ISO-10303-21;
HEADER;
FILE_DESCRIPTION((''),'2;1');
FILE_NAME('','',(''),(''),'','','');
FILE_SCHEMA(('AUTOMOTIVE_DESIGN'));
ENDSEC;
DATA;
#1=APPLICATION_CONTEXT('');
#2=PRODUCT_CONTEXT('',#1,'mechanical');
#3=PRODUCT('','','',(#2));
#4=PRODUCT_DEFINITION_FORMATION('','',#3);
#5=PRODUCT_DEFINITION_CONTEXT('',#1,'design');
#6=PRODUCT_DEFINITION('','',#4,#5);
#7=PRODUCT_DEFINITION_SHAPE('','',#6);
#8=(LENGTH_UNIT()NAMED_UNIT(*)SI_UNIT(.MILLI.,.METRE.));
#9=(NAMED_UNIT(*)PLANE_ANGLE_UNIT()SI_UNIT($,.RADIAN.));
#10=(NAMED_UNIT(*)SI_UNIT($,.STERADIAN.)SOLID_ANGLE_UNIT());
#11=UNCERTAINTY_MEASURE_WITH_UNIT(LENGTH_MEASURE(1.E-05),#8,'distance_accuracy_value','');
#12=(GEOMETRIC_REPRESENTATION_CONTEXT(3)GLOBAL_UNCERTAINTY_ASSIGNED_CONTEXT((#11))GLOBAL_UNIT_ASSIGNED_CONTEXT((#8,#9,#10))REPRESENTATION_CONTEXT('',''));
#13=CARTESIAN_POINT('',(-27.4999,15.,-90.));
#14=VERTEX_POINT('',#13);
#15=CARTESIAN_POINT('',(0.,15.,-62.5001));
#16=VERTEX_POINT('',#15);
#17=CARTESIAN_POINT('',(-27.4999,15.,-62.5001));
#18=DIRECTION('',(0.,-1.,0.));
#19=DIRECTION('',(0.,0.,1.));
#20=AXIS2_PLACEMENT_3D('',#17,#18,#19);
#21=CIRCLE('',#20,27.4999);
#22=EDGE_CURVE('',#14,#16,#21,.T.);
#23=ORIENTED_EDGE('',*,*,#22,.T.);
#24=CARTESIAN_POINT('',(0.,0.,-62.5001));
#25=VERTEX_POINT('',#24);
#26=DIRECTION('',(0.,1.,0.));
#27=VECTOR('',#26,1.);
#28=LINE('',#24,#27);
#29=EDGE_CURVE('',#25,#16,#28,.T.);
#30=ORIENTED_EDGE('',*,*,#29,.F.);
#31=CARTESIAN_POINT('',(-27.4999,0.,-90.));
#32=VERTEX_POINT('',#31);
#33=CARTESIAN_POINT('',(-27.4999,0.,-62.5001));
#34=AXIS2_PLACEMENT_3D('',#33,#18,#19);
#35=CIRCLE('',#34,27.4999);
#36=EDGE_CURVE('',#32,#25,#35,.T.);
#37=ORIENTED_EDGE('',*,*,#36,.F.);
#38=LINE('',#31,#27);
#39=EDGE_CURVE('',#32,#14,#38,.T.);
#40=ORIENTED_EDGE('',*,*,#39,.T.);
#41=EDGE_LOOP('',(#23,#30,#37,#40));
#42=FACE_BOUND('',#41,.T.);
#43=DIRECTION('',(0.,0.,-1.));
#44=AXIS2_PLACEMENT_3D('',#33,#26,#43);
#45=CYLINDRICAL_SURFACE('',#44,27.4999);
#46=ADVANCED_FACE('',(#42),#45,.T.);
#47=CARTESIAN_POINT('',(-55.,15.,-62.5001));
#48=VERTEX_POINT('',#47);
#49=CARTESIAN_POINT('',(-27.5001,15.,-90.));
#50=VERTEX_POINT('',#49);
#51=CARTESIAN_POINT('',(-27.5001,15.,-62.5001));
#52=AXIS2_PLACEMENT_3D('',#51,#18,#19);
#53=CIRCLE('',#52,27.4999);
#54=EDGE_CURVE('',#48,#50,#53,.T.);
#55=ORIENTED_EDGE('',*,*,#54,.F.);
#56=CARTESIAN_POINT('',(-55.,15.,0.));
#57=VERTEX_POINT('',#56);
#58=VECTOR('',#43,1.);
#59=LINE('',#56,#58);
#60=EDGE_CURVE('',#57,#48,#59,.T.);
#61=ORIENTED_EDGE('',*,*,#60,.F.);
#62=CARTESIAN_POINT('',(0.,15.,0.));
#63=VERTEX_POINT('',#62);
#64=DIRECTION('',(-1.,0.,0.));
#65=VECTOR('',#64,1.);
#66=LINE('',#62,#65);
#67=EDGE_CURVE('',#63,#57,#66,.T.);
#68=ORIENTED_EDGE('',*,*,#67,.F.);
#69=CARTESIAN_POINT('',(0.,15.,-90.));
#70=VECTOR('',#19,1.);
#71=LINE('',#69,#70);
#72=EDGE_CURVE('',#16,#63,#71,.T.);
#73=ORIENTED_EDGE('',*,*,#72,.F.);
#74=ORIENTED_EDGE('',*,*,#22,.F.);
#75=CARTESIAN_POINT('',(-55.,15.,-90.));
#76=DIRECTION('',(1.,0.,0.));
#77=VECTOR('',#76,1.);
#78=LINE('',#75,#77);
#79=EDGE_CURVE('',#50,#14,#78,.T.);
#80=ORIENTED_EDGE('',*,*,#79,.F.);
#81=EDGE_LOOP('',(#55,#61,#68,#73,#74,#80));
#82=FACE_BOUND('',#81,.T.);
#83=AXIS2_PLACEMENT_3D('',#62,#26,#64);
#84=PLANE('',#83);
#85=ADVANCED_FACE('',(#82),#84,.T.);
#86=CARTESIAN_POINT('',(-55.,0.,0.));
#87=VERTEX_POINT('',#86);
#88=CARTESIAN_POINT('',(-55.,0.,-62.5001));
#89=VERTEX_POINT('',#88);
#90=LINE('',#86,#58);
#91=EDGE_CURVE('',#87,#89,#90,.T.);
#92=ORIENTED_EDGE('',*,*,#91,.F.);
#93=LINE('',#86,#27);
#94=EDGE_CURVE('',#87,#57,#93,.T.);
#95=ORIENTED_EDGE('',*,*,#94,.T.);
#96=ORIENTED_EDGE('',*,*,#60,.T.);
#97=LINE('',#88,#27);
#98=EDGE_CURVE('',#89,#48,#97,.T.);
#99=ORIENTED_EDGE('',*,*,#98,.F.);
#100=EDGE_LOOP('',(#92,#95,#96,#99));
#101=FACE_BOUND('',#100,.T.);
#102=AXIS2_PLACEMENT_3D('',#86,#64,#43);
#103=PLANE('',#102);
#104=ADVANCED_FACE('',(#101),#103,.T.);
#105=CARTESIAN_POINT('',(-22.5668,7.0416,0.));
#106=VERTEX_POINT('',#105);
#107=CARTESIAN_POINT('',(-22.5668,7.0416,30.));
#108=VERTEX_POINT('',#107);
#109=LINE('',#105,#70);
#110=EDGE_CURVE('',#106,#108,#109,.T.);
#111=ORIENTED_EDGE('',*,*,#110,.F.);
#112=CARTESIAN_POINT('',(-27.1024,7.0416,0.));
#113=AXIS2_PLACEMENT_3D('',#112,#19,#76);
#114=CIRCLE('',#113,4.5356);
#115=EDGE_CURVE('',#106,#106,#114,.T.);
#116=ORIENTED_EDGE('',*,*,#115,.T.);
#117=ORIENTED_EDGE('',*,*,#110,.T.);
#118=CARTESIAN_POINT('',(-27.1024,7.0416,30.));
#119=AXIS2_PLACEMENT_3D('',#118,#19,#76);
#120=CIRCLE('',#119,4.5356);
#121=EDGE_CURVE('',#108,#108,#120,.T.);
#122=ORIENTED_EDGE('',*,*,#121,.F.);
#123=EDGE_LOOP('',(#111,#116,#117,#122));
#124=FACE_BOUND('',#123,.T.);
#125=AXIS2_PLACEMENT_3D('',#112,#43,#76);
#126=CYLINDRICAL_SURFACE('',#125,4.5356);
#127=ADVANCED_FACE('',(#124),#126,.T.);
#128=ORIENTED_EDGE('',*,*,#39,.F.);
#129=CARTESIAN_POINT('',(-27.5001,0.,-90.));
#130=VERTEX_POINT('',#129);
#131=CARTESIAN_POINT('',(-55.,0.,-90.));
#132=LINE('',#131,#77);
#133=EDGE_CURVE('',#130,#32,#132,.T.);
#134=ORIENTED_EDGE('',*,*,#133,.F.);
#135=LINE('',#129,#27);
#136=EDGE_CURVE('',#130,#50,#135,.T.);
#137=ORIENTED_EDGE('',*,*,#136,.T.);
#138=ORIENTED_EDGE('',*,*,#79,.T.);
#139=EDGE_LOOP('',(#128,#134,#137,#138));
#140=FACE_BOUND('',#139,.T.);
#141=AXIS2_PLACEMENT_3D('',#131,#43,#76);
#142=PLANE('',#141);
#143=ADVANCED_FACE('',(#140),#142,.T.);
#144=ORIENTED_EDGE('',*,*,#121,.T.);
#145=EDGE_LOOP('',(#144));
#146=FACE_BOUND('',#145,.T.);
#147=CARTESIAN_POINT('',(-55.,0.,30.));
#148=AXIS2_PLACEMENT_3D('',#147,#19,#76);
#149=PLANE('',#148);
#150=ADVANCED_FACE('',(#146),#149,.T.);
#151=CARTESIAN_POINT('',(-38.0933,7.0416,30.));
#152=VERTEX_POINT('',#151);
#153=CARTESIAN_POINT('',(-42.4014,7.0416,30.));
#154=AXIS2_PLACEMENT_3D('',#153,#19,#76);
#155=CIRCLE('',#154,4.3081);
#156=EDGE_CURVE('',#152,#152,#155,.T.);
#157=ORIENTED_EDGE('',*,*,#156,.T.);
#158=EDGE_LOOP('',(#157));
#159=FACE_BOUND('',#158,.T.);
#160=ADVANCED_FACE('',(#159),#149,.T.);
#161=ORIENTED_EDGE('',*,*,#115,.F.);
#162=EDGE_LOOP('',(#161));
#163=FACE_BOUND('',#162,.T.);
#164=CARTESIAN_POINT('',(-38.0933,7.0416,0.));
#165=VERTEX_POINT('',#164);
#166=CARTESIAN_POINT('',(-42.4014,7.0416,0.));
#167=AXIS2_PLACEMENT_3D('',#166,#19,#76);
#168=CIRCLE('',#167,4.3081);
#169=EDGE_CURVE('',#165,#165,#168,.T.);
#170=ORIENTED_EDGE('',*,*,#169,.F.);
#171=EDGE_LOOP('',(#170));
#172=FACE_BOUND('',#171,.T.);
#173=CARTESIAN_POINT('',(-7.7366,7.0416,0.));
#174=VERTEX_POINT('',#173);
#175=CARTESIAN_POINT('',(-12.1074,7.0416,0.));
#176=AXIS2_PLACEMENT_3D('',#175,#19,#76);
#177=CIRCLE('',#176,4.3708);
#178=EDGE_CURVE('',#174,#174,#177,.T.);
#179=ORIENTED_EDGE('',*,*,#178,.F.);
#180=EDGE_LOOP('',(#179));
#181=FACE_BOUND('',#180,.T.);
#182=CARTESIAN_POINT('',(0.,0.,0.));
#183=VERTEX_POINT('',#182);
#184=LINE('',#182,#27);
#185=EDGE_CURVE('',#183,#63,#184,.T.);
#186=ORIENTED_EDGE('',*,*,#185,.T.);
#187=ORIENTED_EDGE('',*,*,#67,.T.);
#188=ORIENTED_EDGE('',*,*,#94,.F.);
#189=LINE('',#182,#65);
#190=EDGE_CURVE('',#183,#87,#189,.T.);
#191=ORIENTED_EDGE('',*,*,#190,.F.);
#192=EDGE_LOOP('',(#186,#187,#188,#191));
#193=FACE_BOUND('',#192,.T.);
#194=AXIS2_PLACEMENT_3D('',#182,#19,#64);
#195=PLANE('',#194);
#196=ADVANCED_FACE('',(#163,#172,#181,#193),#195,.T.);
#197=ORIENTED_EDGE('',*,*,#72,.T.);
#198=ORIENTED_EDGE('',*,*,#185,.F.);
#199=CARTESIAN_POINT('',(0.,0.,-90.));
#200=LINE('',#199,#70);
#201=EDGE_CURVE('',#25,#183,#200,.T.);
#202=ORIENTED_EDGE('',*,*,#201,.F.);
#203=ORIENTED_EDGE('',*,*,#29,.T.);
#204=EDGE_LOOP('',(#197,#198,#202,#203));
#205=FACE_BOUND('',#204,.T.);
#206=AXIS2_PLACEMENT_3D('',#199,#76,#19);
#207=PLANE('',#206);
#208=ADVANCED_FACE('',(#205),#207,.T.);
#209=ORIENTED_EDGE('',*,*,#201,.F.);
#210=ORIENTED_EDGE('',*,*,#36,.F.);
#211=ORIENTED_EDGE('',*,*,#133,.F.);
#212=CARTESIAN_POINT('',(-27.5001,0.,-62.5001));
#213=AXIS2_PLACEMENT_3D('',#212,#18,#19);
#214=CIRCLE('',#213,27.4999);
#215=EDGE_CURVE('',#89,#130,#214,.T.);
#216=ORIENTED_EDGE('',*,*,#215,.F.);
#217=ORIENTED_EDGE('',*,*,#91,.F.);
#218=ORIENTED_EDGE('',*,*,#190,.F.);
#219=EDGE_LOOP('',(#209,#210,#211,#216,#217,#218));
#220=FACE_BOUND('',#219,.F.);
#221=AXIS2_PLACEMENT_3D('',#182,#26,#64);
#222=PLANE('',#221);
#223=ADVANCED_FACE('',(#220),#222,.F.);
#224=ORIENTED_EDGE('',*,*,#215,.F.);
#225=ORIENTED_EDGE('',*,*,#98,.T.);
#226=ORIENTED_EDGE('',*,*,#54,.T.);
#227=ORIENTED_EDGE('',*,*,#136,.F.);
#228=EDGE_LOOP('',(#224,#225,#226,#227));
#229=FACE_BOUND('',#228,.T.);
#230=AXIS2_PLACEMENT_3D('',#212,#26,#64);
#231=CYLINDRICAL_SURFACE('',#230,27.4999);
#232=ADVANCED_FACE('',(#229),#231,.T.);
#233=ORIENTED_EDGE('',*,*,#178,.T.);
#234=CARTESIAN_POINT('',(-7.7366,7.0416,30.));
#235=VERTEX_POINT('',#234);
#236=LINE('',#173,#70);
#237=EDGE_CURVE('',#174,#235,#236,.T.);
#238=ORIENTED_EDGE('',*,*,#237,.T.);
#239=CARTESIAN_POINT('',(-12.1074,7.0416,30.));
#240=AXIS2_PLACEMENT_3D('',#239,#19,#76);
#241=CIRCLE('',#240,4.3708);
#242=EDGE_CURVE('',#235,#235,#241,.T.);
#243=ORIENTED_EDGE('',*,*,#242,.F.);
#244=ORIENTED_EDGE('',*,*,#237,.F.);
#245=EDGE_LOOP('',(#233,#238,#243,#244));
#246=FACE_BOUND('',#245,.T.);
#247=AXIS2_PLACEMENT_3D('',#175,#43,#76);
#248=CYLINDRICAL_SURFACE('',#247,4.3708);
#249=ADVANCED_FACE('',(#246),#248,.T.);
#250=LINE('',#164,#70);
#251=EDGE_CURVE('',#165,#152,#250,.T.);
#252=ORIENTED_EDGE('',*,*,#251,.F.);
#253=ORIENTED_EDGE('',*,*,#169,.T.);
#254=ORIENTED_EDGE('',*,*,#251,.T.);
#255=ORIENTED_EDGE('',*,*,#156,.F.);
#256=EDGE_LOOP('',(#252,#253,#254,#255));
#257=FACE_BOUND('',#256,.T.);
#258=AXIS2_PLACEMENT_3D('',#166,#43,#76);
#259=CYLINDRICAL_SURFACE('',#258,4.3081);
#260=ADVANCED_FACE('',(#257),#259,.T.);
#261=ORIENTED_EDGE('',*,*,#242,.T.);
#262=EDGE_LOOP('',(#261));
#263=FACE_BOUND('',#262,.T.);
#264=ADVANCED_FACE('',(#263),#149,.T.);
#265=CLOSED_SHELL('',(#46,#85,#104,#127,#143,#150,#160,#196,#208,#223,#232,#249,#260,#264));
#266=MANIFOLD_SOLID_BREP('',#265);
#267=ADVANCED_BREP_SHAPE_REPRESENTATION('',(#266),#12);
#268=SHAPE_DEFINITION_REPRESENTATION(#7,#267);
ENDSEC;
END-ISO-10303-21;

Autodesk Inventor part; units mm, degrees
ref_plane "YZ Plane" through (0, 0, 0) normal (1, 0, 0) x (0, 1, 0)
ref_plane "XZ Plane" through (0, 0, 0) normal (0, 1, 0) x (-1, 0, 0)
ref_plane "XY Plane" through (0, 0, 0) normal (0, 0, 1) x (1, 0, 0)
sketch "Sketch1" plane through (0, 0, 0) normal (0, 1, 0) x (-1, 0, 0)
  line L0 (0, 0) -> (55, 0)
  line L1 (55, 0) -> (55, -90)
  line L2 (55, -90) -> (0, -90)
  line L3 (0, -90) -> (0, 0)
  dimension "d0" = 90
  dimension "d1" = 55
extrude "Extrusion1" add sketch "Sketch1" along normal blind 15
full round fillet "Fillet1" first side at (0, 5, -30) centre faces at (-18.3333, 5, -90) second side at (-55, 5, -60)
sketch "Sketch2" plane through (-55, 0, 0) normal (0, 0, 1) x (1, 0, 0)
  circle A0 centre (12.5986, 7.0416) radius 4.3081
  circle A1 centre (27.8976, 7.0416) radius 4.5356
  circle A2 centre (42.8926, 7.0416) radius 4.3708
  point P0 (55, 0)
extrude "Extrusion2" add sketch "Sketch2" along normal blind 30
sketch "Sketch3" plane through (0, 15, 0) normal (0, 1, 0) x (1, 0, 0)
  line L0 (-48.594, 65.8616) -> (-7.6272, 65.8616) construction
  line L1 (-7.6272, 65.8616) -> (-7.6272, 56.4823) construction
  line L2 (-7.6272, 56.4823) -> (-48.594, 56.4823) construction
  line L3 (-48.594, 56.4823) -> (-48.594, 65.8616) construction
  point P0 (0, 0)
  dimension "d2" = 15
  dimension "d3" = 0
properties part number "tmp 36 now"
